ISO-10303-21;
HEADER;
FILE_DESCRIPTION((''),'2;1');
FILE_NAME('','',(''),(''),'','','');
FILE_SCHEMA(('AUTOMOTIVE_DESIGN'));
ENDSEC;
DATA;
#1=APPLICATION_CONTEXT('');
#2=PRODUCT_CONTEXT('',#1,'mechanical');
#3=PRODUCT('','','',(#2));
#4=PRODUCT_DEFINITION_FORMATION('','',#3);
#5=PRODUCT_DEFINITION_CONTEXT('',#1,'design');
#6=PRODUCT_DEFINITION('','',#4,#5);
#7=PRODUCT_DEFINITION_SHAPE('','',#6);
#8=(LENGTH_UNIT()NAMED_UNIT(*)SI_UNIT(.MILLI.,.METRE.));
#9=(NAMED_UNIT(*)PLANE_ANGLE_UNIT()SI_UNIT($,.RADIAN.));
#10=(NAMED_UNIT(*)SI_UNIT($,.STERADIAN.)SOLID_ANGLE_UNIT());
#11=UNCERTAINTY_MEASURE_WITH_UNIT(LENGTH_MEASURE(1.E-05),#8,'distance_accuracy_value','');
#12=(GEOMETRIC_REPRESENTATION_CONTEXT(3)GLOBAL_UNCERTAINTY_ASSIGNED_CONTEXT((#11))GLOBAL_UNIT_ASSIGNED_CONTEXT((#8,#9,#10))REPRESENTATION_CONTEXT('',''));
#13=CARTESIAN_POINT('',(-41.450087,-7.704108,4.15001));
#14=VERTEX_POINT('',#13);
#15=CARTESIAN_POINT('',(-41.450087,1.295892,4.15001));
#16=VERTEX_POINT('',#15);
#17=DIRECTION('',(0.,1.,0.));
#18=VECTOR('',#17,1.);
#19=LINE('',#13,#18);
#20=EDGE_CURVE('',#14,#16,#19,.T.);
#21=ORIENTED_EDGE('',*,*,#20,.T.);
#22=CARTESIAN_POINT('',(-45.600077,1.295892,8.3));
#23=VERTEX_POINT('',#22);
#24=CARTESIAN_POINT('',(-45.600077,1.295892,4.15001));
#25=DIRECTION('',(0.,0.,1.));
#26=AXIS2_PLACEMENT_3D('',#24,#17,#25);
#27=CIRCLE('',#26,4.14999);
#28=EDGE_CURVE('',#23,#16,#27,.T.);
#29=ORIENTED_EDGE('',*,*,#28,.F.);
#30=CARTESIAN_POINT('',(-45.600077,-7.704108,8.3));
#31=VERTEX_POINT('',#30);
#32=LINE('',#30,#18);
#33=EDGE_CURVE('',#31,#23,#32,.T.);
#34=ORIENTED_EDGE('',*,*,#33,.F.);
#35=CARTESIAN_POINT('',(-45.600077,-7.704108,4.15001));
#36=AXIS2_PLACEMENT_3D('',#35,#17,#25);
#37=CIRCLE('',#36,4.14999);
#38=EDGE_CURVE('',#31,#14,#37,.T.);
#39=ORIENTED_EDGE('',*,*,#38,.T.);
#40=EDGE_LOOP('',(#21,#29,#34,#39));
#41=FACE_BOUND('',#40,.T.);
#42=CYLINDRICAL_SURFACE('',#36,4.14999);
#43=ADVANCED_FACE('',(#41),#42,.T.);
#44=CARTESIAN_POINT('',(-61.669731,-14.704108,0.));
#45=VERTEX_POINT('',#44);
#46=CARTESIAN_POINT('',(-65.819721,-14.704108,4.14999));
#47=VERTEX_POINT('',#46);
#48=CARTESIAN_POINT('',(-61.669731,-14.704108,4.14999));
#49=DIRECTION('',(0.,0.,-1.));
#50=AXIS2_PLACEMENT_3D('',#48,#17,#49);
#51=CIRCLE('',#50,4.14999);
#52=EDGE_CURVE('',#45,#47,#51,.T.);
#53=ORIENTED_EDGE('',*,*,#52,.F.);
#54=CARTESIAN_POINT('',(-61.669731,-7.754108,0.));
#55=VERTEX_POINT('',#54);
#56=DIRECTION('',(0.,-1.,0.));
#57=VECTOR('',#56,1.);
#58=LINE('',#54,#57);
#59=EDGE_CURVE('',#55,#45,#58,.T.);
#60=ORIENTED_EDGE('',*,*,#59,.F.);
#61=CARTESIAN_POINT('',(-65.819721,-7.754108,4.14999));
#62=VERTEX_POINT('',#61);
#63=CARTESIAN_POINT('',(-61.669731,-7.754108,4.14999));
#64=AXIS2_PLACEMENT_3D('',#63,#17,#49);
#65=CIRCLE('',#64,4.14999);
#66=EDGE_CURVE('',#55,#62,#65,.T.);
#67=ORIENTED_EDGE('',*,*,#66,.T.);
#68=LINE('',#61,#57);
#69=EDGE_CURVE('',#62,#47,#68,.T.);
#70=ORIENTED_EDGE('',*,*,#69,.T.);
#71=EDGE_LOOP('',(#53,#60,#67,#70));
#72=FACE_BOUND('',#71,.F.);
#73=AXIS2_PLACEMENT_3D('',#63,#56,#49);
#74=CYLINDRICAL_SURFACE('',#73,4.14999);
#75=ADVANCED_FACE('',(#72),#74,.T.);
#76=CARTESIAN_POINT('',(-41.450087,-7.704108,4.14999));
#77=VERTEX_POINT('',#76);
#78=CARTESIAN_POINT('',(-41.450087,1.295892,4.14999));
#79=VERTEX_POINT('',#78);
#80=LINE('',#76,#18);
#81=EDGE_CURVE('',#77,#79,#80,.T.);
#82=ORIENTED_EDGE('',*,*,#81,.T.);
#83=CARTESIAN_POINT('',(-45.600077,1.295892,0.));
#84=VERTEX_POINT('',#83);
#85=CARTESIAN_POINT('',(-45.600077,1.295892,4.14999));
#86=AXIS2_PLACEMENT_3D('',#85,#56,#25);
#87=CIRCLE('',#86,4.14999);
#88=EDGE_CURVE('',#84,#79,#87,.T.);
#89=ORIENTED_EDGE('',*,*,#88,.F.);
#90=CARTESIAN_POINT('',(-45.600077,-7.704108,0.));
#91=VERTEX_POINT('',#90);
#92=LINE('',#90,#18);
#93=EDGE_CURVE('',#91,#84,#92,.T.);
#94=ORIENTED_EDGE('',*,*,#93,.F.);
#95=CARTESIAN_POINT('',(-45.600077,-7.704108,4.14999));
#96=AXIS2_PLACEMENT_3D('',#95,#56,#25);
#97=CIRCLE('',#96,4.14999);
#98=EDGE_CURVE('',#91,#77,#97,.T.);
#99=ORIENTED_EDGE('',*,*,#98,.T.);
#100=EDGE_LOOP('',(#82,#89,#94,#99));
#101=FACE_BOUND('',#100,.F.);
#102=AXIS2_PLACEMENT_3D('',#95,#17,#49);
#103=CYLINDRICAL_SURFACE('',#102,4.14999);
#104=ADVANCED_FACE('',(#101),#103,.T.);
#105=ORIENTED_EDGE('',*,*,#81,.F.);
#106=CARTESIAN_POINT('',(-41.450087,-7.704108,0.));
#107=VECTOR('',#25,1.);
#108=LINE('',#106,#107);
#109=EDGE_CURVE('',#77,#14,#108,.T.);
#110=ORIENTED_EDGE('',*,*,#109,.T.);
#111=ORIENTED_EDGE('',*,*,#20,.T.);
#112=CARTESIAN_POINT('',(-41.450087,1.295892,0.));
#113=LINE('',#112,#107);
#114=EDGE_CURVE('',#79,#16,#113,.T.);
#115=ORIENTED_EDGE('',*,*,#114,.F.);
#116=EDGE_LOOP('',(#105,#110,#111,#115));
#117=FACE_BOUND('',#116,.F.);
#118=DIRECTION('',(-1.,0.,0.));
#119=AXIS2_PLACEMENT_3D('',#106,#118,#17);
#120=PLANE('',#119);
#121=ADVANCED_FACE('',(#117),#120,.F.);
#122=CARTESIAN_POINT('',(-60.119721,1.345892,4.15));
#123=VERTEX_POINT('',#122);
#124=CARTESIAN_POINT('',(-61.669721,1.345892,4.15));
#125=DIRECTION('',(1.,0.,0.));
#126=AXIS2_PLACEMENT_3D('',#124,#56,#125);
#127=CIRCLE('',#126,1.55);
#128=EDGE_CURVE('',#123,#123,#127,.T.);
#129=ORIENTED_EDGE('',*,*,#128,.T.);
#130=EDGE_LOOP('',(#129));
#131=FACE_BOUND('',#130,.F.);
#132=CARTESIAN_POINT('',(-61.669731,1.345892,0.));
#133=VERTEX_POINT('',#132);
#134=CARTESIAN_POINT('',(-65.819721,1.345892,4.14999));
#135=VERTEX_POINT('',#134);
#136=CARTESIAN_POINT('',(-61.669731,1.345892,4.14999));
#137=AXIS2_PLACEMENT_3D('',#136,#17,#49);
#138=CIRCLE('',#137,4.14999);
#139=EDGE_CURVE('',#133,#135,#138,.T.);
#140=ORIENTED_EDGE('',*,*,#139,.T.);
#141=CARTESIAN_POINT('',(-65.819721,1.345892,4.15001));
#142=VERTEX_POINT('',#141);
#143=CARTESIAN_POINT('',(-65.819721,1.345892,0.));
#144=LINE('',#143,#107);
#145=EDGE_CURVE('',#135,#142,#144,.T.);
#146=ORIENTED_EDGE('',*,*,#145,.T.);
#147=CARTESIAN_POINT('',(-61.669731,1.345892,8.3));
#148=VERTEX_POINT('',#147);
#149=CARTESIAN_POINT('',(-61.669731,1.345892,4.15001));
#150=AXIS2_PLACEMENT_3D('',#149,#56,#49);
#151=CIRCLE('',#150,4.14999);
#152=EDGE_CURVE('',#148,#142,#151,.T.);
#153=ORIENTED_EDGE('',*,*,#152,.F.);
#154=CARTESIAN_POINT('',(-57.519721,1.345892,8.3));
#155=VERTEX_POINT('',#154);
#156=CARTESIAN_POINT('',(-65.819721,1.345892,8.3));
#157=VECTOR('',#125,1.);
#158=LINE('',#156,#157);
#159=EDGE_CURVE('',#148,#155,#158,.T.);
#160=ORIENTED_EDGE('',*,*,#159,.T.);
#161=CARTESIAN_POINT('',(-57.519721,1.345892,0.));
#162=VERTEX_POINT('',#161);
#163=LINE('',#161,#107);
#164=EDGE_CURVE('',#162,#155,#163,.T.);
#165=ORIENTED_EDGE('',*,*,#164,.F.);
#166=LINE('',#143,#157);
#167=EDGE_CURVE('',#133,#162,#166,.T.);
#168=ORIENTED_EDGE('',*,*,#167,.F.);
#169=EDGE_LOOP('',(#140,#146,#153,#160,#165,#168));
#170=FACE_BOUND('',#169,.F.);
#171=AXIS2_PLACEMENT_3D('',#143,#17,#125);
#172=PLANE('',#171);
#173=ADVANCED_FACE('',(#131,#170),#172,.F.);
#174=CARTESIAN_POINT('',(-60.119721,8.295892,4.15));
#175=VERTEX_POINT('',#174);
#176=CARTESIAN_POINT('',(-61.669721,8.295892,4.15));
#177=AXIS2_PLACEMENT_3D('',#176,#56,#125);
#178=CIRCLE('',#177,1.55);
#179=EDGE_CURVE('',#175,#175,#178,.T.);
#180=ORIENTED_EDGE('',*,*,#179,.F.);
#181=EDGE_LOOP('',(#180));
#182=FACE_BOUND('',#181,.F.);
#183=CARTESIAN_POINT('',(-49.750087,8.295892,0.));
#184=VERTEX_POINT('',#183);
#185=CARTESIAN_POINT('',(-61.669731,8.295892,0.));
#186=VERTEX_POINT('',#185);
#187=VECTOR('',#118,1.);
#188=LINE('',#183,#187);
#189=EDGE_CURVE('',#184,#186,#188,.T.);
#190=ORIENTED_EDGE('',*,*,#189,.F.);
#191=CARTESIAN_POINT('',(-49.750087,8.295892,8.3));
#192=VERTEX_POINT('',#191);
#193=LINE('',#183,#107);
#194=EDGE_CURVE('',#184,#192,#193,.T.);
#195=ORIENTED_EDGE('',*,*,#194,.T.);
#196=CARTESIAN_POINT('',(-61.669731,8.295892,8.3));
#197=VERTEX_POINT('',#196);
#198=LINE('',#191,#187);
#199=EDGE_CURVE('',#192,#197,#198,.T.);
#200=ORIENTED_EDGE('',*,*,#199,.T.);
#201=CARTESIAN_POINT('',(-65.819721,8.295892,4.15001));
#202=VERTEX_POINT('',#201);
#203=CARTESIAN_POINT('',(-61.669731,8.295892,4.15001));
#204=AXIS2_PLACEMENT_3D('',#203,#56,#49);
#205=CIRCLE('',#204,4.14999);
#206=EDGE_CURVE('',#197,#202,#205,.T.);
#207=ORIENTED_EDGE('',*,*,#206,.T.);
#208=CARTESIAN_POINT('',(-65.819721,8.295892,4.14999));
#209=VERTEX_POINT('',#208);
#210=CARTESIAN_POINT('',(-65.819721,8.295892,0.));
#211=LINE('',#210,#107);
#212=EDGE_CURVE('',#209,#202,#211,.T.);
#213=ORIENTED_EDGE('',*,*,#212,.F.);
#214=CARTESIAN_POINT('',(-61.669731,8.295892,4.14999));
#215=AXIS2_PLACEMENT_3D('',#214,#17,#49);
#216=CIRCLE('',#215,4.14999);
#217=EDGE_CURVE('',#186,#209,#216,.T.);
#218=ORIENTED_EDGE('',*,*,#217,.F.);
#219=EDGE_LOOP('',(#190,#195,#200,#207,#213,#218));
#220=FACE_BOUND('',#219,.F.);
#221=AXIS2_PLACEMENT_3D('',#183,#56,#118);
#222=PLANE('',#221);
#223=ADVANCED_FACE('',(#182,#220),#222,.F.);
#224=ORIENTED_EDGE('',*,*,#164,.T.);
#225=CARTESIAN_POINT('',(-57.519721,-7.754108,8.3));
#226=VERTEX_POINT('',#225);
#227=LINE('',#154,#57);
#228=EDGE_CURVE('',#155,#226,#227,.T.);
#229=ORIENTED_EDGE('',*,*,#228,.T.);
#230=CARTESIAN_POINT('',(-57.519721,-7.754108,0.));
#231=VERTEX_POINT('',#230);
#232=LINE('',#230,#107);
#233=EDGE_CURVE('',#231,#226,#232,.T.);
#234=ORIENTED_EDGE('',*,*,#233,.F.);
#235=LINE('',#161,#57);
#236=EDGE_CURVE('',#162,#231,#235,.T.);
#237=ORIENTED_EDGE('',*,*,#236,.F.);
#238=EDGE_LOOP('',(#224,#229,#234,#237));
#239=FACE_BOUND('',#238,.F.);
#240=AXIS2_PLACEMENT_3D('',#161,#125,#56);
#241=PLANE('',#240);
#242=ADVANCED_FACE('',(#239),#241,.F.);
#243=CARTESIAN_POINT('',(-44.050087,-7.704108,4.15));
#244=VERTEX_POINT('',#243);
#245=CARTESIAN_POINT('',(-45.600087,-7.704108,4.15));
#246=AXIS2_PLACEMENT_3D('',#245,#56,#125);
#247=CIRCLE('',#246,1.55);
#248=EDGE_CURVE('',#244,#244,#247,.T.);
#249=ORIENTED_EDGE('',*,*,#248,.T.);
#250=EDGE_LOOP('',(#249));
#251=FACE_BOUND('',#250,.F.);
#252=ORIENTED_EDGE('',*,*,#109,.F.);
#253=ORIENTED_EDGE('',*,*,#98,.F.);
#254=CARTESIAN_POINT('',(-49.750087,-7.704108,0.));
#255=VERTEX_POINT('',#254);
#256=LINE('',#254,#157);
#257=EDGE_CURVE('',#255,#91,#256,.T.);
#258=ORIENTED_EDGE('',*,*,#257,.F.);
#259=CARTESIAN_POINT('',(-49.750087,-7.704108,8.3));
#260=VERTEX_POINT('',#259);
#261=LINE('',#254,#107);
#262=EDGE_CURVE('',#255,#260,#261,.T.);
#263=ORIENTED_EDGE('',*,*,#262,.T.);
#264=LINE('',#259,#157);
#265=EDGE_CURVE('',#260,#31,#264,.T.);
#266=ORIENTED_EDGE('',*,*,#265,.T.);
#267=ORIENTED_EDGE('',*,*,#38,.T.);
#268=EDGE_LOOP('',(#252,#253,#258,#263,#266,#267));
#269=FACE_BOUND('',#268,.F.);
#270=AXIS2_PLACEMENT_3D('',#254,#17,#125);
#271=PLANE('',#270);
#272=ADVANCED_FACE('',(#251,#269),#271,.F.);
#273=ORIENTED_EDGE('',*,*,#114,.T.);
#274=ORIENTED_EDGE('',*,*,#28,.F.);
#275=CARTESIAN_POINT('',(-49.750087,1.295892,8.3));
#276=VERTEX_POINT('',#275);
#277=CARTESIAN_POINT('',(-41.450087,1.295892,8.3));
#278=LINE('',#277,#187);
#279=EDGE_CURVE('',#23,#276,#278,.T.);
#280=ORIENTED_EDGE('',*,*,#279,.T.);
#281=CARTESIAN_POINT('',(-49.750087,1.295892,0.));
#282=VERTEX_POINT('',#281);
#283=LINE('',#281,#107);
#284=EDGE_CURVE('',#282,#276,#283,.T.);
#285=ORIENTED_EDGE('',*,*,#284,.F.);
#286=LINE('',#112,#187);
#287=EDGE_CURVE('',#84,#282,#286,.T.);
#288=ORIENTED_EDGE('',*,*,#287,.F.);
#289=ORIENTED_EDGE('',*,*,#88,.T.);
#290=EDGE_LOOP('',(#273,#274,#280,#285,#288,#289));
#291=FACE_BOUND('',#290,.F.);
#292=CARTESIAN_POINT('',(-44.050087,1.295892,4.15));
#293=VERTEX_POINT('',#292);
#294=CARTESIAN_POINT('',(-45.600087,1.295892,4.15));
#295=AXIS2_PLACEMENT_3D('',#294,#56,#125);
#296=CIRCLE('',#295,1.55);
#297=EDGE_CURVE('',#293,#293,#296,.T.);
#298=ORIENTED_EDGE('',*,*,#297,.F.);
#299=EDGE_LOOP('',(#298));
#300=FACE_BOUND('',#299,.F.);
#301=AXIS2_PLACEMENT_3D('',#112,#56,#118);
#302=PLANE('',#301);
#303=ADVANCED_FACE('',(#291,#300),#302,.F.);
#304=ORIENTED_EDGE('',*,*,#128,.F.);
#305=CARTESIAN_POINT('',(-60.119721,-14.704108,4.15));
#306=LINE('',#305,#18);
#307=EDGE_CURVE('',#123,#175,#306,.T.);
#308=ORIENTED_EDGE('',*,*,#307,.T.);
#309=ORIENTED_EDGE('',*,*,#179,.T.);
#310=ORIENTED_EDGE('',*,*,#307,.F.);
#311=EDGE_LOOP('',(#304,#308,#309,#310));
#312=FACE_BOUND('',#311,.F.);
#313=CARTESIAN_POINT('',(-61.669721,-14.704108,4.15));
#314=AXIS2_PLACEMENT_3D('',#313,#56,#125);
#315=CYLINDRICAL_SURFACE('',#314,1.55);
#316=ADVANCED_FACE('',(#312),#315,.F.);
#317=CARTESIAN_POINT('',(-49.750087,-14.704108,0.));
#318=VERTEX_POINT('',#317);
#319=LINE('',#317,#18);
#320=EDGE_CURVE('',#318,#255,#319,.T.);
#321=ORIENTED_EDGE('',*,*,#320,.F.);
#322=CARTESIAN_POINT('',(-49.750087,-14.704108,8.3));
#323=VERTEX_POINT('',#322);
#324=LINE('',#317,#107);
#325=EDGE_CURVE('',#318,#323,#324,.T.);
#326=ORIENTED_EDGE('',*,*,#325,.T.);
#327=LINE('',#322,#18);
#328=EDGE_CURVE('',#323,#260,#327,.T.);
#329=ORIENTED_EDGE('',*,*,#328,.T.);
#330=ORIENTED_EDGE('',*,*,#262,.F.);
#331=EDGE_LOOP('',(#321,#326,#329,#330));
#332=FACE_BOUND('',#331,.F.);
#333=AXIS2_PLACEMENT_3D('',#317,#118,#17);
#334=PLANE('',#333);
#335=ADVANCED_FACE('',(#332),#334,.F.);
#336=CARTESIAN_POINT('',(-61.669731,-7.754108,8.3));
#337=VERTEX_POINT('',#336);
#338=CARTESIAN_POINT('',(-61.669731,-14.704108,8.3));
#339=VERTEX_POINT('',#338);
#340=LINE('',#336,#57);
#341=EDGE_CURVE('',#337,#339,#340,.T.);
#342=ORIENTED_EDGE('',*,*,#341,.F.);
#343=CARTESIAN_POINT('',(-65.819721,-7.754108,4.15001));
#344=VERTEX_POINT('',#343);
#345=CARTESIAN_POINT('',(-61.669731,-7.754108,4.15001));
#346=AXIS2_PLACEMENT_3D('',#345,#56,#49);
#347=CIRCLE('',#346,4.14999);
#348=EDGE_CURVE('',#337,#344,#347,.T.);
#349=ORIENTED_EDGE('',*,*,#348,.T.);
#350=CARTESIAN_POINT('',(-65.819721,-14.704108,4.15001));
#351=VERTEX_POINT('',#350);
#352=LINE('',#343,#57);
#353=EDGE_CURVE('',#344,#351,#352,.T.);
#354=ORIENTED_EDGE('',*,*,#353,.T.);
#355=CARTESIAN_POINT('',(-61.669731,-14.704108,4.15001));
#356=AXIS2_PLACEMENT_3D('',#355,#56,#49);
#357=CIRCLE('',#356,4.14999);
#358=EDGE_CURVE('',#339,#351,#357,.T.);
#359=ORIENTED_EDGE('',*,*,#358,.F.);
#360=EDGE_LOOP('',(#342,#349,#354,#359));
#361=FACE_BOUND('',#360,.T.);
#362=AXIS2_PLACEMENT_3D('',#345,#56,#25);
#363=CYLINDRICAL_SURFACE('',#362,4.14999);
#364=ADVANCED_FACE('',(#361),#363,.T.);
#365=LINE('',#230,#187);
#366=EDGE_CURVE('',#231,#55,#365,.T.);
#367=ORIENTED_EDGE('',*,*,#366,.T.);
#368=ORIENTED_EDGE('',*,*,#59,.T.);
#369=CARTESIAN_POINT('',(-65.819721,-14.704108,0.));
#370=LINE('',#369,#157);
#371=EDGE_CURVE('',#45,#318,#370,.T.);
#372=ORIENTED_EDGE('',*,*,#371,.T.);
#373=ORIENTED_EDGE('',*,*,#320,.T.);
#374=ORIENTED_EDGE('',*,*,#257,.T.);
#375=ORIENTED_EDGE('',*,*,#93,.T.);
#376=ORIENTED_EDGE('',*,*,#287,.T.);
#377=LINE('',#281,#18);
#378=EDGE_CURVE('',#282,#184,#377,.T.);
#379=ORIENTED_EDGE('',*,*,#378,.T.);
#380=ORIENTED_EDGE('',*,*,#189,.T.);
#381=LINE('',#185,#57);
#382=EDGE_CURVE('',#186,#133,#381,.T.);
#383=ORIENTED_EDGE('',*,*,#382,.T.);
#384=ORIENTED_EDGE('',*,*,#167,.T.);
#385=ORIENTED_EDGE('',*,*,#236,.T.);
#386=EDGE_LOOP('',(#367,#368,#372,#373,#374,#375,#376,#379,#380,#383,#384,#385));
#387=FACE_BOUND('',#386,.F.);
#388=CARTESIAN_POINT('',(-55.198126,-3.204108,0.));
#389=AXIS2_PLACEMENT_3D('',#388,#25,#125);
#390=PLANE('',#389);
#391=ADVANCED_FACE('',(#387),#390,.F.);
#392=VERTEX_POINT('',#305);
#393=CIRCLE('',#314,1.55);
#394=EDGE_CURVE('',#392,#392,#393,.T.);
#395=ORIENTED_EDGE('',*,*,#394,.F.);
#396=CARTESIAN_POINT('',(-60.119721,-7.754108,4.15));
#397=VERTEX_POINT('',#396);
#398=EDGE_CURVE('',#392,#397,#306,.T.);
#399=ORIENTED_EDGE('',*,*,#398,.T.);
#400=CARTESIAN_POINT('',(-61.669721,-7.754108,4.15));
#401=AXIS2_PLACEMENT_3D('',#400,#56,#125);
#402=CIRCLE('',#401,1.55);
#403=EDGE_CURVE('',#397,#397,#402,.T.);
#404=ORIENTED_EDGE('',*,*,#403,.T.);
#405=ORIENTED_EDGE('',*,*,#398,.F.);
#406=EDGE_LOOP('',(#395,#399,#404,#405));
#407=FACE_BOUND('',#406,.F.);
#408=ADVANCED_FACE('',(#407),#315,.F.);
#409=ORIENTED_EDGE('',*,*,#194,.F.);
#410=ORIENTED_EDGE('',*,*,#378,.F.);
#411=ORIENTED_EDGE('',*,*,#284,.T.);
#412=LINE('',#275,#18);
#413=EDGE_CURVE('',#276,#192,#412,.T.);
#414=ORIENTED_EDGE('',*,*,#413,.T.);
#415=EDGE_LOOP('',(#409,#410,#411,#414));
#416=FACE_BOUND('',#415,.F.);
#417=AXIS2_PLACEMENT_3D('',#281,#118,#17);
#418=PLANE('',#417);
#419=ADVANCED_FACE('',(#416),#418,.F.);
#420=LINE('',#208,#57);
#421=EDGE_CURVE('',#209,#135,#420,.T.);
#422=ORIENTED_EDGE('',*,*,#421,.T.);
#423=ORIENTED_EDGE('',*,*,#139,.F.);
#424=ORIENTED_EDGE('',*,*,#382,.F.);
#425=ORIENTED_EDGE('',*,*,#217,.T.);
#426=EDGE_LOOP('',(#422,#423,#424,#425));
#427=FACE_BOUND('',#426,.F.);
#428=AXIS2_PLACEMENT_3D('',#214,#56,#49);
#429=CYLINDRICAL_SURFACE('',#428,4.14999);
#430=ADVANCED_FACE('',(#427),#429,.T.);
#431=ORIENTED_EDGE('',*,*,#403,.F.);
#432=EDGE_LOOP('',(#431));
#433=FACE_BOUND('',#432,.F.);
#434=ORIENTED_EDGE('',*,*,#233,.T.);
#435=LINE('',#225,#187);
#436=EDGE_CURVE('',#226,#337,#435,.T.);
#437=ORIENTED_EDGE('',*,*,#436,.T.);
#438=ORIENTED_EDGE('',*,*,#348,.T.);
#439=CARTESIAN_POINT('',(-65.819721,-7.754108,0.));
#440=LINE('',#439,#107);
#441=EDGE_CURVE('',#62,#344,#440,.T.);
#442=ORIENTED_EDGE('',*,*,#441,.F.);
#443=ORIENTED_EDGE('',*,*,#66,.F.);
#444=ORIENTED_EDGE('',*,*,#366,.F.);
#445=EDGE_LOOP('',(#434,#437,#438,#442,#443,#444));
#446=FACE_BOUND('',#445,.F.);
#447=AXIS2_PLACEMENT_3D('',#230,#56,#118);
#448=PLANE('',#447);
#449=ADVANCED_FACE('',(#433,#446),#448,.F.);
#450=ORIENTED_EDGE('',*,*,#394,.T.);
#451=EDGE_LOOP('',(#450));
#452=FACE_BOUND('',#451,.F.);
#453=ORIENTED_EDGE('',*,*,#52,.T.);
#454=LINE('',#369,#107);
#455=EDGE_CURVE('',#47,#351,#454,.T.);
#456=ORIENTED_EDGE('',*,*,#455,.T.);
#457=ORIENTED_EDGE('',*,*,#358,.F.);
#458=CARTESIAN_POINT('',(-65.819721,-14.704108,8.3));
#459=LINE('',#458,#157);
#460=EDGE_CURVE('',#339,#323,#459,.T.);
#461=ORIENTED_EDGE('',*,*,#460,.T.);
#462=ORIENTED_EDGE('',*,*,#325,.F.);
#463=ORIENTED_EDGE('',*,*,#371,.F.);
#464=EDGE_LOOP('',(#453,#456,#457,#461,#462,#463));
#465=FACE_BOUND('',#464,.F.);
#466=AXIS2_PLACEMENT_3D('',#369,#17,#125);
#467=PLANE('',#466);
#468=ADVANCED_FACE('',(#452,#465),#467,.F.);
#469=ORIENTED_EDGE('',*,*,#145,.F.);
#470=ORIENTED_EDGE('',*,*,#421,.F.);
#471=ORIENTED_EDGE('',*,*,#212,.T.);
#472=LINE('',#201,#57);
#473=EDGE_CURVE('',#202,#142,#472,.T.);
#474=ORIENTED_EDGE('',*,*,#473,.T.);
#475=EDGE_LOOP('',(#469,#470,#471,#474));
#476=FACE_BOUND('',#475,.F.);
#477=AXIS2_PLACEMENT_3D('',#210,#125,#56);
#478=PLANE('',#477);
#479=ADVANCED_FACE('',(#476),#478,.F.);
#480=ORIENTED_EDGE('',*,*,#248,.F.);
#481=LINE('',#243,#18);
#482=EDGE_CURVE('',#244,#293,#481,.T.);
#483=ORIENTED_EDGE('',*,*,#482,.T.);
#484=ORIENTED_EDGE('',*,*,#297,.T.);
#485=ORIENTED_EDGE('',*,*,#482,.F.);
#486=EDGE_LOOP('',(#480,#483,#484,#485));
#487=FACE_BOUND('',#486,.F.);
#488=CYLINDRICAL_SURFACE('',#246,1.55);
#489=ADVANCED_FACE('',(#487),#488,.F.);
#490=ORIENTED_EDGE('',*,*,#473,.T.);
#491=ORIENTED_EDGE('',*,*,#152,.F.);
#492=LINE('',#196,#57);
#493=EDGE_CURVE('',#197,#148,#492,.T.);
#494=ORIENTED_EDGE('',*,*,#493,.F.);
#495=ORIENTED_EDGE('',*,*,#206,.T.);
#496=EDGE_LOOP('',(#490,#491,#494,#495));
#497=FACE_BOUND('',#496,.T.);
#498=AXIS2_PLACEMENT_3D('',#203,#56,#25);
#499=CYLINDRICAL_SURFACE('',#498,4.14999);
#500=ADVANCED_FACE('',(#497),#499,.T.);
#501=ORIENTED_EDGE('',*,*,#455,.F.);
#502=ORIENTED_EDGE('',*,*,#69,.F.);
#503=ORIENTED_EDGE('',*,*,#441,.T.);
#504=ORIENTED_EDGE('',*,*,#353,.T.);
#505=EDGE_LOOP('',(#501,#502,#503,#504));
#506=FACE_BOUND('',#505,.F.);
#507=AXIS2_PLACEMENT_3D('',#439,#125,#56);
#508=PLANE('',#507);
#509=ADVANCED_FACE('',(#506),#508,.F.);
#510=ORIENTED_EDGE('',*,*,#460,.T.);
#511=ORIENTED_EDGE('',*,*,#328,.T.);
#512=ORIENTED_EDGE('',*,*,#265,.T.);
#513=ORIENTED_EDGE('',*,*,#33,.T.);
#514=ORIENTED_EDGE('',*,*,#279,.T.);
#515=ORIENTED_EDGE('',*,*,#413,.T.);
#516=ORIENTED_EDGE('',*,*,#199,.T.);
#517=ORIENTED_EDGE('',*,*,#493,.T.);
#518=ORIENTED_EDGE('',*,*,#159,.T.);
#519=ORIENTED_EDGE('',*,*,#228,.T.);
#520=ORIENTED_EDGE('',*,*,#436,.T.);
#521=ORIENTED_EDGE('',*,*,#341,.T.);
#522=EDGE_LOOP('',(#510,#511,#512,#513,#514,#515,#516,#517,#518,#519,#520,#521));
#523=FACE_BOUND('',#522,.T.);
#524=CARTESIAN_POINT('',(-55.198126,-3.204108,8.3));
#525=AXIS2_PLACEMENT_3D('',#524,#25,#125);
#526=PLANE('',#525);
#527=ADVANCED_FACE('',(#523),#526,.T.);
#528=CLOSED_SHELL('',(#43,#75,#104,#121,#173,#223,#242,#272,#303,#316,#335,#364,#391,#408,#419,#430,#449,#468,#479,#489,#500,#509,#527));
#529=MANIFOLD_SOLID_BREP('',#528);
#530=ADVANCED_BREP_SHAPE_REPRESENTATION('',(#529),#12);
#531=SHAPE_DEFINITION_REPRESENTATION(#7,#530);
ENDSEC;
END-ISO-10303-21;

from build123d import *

# Parameters (mm, degrees)
F1_DEPTH = 8.3
F2_R     = 1.55
F3_DEPTH = 23.001
F4_R     = 1.55
F5_DEPTH = 16.001
F6_R     = 4.14999


# Not quite as in the source:
# - a fillet or chamfer is up to 0.001 mm smaller than in the source, because OpenCascade refuses the exact size


with BuildPart() as f1:
    # F0 (on Top) → F1 (new body)
    with BuildSketch(Plane.XY):
        Polygon((-57.5197213515, -7.7541078215), (-65.8197213515, -7.7541078215), (-65.8197213515, -14.7041078215), (-49.7500874824, -14.7041078215), (-49.7500874824, -7.7041078215), (-41.4500874824, -7.7041078215), (-41.4500874824, 1.2958921785), (-49.7500874824, 1.2958921785), (-49.7500874824, 8.2958921785), (-65.8197213515, 8.2958921785), (-65.8197213515, 1.3458921785), (-57.5197213515, 1.3458921785), align=None)
    extrude(amount=F1_DEPTH)

    # F2 (on face) → F3 (cut, through all)
    with BuildSketch(Plane.XZ.offset(14.7041078215)):
        with Locations((-61.6697213515, 4.15)):
            Circle(F2_R)
    extrude(amount=-F3_DEPTH, mode=Mode.SUBTRACT)

    # F4 (on face) → F5 (cut, through all)
    with BuildSketch(Plane.XZ.offset(7.7041078215)):
        with Locations((-45.6000874824, 4.15)):
            Circle(F4_R)
    extrude(amount=-F5_DEPTH, mode=Mode.SUBTRACT)

    # F6 (radius 4.15 in the source; OpenCascade refuses exactly that, so slightly less here)
    f6_edges = [f1.edges().sort_by_distance(p)[0] for p in [
        (-65.819721, 4.820892, 8.3),
        (-65.819721, 4.820892, 0),
        (-65.819721, -11.229108, 0),
        (-65.819721, -11.229108, 8.3),
        (-41.450087, -3.204108, 0),
        (-41.450087, -3.204108, 8.3),
    ]]
    fillet(f6_edges, radius=F6_R)


solid = f1.part
